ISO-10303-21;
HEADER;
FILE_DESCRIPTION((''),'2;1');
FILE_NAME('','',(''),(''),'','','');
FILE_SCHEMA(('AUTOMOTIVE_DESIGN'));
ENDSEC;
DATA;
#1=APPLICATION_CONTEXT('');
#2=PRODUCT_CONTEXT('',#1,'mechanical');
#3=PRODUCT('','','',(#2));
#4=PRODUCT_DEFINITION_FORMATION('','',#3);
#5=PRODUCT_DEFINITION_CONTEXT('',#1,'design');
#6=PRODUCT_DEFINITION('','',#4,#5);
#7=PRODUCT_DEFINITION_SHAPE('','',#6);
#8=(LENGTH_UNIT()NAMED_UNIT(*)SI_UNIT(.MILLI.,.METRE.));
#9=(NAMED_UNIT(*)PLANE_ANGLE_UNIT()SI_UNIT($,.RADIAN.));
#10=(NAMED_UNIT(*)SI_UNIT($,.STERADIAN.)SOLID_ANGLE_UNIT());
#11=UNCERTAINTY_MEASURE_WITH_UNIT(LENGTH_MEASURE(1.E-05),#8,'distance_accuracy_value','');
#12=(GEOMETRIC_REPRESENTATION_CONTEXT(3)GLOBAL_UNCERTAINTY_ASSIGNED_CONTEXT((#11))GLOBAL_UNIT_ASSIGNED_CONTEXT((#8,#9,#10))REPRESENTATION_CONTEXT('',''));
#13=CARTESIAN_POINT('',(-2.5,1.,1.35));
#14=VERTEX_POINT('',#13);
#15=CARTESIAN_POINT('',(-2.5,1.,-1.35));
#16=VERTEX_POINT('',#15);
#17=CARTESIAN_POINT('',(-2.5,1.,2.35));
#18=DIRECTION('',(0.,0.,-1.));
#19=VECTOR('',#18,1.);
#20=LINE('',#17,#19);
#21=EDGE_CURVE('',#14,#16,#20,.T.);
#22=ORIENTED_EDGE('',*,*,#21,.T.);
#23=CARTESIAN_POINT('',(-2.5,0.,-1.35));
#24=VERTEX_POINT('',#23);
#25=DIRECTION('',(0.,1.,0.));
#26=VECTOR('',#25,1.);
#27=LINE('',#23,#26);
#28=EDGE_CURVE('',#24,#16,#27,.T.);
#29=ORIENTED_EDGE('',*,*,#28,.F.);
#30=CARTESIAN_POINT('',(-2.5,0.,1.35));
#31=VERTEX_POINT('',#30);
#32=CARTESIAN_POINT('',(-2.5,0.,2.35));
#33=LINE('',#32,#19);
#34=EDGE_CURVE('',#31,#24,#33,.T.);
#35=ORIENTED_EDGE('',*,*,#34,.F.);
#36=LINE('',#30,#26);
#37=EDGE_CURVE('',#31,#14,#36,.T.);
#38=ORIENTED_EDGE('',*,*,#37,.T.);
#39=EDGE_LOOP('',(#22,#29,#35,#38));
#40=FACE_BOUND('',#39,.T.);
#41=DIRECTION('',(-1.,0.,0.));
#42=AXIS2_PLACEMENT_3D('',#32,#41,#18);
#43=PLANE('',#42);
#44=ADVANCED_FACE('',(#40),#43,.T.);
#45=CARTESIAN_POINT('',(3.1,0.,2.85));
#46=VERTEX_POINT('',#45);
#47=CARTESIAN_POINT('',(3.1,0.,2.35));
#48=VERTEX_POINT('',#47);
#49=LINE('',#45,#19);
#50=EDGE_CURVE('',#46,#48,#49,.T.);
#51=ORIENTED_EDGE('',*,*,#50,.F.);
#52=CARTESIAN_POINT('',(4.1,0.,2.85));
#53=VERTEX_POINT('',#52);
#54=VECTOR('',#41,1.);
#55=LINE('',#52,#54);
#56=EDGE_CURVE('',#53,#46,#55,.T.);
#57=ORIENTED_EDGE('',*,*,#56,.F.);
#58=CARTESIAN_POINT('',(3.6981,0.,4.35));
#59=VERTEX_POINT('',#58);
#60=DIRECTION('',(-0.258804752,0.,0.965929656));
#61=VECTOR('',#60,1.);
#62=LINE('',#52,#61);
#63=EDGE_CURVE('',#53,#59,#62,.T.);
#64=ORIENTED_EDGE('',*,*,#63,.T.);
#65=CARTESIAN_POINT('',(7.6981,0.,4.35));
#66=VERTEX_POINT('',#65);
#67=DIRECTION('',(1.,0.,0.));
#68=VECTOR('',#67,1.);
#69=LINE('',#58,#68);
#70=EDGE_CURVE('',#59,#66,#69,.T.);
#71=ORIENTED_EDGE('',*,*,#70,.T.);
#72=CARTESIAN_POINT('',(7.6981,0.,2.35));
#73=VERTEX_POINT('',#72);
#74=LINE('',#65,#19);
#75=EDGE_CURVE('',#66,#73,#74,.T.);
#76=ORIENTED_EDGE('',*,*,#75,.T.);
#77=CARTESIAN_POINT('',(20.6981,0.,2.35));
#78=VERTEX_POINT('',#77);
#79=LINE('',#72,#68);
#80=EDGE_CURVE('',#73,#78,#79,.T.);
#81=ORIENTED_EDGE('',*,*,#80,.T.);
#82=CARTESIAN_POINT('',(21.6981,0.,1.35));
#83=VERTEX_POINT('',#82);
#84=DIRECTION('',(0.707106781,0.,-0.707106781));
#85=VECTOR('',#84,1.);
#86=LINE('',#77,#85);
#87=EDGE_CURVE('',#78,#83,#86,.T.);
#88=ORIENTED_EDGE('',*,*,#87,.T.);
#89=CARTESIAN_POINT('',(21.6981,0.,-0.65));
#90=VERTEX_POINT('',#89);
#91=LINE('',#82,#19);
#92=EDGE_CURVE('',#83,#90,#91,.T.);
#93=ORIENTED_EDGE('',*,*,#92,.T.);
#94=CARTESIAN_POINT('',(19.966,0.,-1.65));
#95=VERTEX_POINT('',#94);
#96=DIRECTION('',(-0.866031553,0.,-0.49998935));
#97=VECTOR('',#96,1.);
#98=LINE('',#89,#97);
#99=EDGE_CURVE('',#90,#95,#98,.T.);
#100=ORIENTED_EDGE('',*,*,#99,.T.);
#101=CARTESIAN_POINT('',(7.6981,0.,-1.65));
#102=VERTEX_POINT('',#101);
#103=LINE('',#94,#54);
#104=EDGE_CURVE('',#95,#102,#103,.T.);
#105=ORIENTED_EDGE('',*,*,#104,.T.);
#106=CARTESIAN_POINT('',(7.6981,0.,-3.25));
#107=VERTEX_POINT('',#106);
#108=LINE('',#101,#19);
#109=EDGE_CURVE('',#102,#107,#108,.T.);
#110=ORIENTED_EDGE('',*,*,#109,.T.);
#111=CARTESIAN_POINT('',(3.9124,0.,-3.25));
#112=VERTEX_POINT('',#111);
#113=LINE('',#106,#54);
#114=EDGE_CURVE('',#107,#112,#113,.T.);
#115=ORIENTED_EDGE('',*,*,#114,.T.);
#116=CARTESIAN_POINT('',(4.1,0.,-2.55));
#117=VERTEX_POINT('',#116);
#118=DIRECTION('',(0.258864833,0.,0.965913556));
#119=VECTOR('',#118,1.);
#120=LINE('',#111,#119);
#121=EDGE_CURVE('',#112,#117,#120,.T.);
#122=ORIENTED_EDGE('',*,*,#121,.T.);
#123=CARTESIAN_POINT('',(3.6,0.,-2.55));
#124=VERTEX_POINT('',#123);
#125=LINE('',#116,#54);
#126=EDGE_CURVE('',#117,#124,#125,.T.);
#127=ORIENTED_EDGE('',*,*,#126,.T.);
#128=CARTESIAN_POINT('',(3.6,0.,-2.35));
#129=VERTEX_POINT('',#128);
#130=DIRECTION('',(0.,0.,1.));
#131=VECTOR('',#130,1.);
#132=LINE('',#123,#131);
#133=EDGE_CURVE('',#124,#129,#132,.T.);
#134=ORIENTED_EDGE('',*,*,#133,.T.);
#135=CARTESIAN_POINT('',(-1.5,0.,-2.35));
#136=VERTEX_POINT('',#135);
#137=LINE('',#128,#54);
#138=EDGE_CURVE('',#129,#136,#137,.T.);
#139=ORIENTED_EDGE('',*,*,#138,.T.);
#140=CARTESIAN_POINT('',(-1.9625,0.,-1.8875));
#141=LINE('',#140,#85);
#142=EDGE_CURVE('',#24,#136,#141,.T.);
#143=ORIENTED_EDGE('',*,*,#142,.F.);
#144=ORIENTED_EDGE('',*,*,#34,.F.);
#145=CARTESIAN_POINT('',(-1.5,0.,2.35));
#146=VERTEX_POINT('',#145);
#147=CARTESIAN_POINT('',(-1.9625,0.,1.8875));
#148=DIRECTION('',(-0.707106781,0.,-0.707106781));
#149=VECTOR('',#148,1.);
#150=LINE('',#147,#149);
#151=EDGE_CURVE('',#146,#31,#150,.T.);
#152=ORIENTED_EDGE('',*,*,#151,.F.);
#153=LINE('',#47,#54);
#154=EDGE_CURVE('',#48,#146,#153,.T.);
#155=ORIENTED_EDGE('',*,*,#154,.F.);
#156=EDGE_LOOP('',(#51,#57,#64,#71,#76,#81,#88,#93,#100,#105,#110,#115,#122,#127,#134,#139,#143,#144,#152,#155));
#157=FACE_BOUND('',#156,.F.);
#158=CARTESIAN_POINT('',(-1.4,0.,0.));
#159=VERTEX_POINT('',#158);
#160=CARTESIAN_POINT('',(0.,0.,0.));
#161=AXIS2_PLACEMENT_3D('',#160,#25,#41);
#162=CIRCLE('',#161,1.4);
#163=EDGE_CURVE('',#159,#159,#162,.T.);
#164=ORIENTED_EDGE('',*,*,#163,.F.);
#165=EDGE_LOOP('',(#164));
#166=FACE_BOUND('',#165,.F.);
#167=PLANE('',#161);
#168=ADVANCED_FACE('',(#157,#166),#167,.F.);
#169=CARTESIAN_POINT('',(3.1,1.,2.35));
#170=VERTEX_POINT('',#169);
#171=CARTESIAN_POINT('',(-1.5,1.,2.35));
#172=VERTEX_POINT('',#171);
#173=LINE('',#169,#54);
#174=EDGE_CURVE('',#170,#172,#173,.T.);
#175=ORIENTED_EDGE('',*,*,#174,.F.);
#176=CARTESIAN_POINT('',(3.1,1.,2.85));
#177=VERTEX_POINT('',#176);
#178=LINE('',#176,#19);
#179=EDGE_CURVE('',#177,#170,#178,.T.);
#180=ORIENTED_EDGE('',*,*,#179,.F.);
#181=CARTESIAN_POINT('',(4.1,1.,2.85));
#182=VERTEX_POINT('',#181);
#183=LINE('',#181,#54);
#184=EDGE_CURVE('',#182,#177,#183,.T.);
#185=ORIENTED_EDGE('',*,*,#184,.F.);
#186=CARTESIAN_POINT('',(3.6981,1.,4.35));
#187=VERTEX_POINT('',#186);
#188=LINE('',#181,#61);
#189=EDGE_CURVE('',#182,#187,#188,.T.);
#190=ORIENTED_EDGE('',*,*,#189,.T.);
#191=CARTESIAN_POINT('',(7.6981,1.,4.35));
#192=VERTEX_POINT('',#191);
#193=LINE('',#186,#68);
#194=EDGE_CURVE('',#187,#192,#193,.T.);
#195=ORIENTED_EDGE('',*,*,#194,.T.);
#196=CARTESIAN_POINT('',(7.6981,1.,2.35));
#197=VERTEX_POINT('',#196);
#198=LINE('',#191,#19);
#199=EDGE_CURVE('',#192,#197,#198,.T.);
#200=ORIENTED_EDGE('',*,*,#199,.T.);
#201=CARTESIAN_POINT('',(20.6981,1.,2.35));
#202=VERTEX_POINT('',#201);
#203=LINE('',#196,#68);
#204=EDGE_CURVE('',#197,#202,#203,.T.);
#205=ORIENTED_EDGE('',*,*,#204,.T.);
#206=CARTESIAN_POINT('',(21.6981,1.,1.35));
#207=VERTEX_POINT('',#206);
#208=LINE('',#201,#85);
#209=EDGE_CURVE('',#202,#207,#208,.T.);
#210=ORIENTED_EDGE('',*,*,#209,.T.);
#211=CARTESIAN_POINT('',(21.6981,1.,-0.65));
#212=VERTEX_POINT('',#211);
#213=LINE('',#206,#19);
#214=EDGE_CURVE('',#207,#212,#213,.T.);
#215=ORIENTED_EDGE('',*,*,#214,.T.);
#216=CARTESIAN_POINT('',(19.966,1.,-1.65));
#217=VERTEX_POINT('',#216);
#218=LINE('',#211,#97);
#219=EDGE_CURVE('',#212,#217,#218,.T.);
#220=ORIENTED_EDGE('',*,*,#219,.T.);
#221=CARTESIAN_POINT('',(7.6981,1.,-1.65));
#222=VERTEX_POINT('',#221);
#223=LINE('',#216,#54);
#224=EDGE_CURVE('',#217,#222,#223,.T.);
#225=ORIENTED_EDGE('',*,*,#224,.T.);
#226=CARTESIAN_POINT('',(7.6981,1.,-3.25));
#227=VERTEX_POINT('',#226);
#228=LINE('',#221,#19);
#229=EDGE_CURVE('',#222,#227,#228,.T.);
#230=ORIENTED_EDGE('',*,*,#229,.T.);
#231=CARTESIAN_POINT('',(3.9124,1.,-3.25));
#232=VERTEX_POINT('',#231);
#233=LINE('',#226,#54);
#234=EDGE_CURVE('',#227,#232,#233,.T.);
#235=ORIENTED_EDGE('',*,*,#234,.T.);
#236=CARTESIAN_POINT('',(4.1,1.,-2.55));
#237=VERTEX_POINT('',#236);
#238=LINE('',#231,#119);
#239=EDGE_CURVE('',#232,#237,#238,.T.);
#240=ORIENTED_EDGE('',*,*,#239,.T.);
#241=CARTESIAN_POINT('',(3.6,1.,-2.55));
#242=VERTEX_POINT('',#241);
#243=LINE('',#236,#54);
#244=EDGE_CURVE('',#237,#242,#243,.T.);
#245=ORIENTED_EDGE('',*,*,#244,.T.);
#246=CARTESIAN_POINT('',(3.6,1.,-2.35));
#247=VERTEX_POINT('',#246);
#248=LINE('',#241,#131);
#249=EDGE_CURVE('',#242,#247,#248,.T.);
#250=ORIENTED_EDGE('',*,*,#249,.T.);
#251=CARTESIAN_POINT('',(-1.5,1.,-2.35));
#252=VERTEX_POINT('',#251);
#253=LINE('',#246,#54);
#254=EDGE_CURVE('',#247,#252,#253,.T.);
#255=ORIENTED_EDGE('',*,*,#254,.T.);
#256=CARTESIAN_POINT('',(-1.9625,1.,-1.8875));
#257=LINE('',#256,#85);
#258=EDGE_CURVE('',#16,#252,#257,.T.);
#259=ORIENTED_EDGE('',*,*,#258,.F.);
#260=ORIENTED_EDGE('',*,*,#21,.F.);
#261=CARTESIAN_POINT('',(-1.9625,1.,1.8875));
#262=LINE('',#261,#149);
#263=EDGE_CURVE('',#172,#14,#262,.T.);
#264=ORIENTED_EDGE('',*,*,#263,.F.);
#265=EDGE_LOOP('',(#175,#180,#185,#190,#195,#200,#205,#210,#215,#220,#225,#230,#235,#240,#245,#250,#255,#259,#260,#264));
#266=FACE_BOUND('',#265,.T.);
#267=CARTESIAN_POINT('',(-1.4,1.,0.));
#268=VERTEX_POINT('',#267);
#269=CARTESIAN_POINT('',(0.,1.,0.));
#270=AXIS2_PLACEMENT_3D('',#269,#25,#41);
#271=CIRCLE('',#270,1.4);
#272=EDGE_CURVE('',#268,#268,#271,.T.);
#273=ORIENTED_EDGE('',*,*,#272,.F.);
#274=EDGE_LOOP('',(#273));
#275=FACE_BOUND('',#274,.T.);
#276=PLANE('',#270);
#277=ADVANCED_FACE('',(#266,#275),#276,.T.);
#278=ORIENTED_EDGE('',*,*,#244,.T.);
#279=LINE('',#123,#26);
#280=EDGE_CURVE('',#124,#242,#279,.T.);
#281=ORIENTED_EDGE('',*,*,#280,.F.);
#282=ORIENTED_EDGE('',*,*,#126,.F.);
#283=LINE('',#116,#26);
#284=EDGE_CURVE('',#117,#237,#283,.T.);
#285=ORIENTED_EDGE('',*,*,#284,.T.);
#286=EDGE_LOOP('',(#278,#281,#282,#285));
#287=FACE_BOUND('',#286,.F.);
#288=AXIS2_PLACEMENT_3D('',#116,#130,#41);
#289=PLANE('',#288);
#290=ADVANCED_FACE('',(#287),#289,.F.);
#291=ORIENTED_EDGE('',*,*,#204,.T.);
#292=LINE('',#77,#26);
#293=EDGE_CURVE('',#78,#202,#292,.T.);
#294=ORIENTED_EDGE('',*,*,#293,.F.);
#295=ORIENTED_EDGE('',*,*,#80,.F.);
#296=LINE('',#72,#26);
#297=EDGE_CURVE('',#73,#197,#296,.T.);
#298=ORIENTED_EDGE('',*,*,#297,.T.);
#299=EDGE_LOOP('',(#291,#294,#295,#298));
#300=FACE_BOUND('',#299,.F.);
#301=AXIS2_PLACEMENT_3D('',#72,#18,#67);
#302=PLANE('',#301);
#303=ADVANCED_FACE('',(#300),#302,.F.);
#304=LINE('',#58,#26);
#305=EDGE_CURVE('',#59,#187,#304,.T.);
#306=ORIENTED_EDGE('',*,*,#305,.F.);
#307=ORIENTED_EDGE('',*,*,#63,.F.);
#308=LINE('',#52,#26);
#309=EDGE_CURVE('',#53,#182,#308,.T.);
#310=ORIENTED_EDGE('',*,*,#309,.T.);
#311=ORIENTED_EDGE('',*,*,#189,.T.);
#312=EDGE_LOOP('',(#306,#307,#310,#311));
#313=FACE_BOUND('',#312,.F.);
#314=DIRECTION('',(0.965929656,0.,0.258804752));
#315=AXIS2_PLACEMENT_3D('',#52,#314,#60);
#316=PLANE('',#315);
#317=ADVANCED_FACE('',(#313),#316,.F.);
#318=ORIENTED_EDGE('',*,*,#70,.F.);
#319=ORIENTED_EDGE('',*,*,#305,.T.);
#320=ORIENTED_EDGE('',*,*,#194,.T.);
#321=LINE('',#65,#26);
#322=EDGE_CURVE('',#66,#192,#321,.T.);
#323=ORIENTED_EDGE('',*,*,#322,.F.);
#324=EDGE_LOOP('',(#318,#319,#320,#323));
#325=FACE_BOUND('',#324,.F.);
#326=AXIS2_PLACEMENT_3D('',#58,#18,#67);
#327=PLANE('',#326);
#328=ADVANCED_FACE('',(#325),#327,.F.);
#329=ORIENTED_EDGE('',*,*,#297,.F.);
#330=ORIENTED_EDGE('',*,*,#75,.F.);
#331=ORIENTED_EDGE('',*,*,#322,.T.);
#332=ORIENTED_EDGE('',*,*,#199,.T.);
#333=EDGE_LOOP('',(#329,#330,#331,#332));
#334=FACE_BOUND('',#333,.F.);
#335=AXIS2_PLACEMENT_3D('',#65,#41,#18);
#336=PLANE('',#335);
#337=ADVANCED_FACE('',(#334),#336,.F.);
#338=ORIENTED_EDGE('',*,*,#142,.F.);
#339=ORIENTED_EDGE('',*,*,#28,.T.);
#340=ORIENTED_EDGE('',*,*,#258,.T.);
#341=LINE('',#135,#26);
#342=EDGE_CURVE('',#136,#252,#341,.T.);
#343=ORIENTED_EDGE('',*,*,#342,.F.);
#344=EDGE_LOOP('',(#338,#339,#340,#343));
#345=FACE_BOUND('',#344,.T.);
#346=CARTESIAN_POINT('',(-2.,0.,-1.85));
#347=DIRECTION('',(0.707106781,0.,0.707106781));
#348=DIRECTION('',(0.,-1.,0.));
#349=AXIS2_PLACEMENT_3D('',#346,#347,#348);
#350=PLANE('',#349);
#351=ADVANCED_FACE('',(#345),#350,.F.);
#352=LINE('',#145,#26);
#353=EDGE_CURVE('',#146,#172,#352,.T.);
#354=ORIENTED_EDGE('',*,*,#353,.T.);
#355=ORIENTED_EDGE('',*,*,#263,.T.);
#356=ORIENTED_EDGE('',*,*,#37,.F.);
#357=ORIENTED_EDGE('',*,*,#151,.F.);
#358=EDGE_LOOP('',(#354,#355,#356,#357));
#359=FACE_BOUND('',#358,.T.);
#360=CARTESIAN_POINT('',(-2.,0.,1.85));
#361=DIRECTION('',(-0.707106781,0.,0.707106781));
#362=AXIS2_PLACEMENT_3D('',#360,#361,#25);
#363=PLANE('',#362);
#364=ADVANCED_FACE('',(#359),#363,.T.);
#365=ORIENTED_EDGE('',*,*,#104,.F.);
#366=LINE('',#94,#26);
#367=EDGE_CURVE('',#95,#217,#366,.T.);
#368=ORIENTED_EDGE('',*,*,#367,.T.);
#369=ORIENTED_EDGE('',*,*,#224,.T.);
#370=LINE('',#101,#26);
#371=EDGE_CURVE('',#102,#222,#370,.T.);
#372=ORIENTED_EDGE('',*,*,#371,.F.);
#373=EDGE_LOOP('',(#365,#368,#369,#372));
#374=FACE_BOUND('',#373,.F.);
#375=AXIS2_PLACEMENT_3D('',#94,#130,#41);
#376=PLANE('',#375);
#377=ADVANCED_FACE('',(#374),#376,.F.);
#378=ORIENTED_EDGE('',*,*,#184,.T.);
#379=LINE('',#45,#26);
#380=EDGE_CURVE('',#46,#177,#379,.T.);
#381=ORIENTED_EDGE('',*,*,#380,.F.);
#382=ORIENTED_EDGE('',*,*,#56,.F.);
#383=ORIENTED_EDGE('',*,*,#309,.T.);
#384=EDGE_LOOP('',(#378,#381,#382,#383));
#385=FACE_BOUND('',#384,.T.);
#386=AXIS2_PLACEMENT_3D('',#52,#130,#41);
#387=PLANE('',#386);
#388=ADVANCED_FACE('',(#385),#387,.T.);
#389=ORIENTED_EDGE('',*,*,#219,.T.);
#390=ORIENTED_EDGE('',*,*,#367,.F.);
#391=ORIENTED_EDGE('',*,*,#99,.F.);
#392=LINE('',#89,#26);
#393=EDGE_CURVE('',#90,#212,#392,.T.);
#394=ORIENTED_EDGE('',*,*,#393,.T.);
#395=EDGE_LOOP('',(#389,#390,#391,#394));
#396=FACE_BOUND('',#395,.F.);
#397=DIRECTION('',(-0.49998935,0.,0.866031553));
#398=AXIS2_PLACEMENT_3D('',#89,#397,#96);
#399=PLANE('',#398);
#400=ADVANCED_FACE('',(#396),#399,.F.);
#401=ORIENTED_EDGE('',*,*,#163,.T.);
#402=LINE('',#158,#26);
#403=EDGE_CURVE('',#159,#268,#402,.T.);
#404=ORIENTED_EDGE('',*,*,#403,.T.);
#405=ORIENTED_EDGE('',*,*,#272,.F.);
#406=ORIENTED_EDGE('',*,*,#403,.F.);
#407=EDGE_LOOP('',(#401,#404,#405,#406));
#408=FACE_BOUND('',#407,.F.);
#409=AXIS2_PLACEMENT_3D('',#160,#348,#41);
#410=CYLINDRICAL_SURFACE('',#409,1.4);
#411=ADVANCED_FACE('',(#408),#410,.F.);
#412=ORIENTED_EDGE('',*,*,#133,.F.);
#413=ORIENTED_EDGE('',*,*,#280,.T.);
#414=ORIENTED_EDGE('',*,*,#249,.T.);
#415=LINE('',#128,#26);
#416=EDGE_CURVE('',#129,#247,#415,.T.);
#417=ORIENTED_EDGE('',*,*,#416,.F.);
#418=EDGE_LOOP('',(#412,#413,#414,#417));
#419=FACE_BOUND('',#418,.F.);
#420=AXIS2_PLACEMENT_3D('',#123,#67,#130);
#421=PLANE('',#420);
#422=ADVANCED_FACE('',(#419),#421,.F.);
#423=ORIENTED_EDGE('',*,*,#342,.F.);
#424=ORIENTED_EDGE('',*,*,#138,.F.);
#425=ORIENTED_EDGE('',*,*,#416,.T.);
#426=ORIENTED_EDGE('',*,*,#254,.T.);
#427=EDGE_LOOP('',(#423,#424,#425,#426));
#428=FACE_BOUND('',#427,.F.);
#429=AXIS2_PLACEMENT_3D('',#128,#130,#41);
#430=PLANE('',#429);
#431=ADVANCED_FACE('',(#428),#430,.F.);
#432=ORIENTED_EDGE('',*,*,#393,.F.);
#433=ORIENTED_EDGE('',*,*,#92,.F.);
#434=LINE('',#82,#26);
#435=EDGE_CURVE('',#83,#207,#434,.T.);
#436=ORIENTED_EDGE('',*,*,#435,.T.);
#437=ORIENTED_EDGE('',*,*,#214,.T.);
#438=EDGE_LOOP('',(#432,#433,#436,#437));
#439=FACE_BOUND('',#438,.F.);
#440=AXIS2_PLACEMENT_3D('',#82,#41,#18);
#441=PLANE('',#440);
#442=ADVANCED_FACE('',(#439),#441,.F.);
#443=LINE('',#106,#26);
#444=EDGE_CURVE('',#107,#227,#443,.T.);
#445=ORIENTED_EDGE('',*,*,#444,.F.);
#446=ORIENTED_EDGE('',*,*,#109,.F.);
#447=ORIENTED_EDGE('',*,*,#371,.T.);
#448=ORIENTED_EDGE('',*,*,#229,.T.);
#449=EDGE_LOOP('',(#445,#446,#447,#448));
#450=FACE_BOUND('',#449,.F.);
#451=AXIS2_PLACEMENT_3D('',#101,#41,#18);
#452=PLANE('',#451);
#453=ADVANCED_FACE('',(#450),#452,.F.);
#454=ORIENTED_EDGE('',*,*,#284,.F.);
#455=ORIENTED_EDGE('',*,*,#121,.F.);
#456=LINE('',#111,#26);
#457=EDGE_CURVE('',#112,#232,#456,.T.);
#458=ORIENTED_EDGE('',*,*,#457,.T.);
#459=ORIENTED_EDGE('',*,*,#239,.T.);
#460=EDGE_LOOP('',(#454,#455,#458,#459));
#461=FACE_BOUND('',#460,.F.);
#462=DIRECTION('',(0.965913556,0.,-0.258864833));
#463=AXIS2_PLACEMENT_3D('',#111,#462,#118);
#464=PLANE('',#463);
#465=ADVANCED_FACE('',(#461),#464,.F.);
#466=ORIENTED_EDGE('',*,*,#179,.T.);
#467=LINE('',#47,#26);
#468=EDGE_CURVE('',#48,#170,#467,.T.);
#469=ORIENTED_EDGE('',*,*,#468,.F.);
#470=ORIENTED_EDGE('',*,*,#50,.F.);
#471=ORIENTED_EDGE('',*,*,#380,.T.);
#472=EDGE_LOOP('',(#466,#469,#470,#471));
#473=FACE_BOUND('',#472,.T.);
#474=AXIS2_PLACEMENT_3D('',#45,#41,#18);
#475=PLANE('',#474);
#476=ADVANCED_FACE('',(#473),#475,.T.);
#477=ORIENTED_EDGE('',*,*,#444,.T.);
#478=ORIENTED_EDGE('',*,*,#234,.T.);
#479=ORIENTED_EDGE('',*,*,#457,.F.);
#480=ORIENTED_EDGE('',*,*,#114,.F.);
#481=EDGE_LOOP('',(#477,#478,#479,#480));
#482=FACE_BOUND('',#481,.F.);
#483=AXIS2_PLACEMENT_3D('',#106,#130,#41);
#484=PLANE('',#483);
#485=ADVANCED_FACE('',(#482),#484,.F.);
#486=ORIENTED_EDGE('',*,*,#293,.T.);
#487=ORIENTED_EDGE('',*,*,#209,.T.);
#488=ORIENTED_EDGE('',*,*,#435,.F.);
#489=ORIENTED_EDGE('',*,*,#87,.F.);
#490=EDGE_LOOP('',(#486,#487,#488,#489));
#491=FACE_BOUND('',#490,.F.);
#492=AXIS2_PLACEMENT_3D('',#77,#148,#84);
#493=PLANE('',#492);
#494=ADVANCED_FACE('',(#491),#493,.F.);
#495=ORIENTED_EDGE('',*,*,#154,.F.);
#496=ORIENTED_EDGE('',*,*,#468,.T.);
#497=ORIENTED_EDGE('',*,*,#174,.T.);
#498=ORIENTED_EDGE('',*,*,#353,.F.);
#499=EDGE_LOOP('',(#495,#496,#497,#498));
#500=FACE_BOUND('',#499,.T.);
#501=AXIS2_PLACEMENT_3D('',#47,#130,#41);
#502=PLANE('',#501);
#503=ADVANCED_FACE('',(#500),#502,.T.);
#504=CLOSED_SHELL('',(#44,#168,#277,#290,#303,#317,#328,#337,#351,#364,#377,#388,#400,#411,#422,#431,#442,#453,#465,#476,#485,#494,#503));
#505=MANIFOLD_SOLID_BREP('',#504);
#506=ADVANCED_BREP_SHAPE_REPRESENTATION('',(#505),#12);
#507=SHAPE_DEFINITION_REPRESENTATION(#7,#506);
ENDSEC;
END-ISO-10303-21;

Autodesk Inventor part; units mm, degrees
ref_plane "YZ Plane" through (0, 0, 0) normal (1, 0, 0) x (0, 1, 0)
ref_plane "XZ Plane" through (0, 0, 0) normal (0, 1, 0) x (-1, 0, 0)
ref_plane "XY Plane" through (0, 0, 0) normal (0, 0, 1) x (1, 0, 0)
sketch "Sketch1" plane through (0, 0, 0) normal (0, 1, 0) x (-1, 0, 0)
  line L0 (-4.1, 2.85) -> (-3.1, 2.85)
  line L1 (-3.1, 2.85) -> (-3.1, 2.35)
  line L2 (-3.1, 2.35) -> (2.5, 2.35)
  line L3 (2.5, 2.35) -> (2.5, -2.35)
  line L4 (-4.1, 2.85) -> (-3.6981, 4.35)
  line L5 (-3.6981, 4.35) -> (-7.6981, 4.35)
  line L6 (-7.6981, 4.35) -> (-7.6981, 2.35)
  line L7 (-7.6981, 2.35) -> (-20.6981, 2.35)
  line L8 (-20.6981, 2.35) -> (-21.6981, 1.35)
  line L9 (-21.6981, 1.35) -> (-21.6981, -0.65)
  line L10 (-21.6981, -0.65) -> (-19.966, -1.65)
  line L11 (-19.966, -1.65) -> (-7.6981, -1.65)
  line L12 (-7.6981, -1.65) -> (-7.6981, -3.25)
  line L13 (-7.6981, -3.25) -> (-3.9124, -3.25)
  line L14 (-3.9124, -3.25) -> (-4.1, -2.55)
  line L15 (-4.1, -2.55) -> (-3.6, -2.55)
  line L16 (-3.6, -2.55) -> (-3.6, -2.35)
  line L17 (-3.6, -2.35) -> (2.5, -2.35)
  circle A0 centre (0, 0) radius 1.4
  dimension "d1" = 4
  dimension "d2" = 2
  dimension "d3" = 75
  dimension "d4" = 4.7
  dimension "d5" = 5.6
  dimension "d6" = 1
  dimension "d7" = 0.5
  dimension "d8" = 75
  dimension "d9" = 7.6
  dimension "d10" = 2
  dimension "d11" = 0.5
  dimension "d12" = 0.2
  dimension "d13" = 2.8
  dimension "d14" = 2.5
  dimension "d15" = 2.35
  dimension "d17" = 0
  dimension "d18" = 0
  dimension "d19" = 4
  dimension "d20" = 0
  dimension "d21" = 0
  dimension "d23" = 2
  dimension "d24" = 60
  dimension "d25" = 45
  dimension "d26" = 14
  dimension "d27" = 1
extrude "Plate1" add sketch "Sketch1" along normal blind 1
chamfer "Corner Chamfer1" distance 1 angle 45 2 edges at (-2.5, 0.5, 2.35) (-2.5, 0.5, -2.35)
equation "\"d8\" = d3"
equation "\"d15\" = 0.5 * d4"
equation "\"d31\" = Thickness"
equation "\"BendRadius\" = Thickness"
equation "\"BendReliefWidth\" = Thickness"
equation "\"BendReliefDepth\" = 0.5 * Thickness"
equation "\"CornerReliefSize\" = 4 * Thickness"
equation "\"MinimumRemnant\" = 2 * Thickness"
equation "\"TransitionRadius\" = BendRadius"
equation "\"JacobiRadiusSize\" = BendRadius"
equation "\"GapSize\" = Thickness"
equation "\"d16\" = BendRadius"
equation "\"Thickness\" = 1"
properties part number "PlacaTerraPlug" material "Steel, Galvanized"
